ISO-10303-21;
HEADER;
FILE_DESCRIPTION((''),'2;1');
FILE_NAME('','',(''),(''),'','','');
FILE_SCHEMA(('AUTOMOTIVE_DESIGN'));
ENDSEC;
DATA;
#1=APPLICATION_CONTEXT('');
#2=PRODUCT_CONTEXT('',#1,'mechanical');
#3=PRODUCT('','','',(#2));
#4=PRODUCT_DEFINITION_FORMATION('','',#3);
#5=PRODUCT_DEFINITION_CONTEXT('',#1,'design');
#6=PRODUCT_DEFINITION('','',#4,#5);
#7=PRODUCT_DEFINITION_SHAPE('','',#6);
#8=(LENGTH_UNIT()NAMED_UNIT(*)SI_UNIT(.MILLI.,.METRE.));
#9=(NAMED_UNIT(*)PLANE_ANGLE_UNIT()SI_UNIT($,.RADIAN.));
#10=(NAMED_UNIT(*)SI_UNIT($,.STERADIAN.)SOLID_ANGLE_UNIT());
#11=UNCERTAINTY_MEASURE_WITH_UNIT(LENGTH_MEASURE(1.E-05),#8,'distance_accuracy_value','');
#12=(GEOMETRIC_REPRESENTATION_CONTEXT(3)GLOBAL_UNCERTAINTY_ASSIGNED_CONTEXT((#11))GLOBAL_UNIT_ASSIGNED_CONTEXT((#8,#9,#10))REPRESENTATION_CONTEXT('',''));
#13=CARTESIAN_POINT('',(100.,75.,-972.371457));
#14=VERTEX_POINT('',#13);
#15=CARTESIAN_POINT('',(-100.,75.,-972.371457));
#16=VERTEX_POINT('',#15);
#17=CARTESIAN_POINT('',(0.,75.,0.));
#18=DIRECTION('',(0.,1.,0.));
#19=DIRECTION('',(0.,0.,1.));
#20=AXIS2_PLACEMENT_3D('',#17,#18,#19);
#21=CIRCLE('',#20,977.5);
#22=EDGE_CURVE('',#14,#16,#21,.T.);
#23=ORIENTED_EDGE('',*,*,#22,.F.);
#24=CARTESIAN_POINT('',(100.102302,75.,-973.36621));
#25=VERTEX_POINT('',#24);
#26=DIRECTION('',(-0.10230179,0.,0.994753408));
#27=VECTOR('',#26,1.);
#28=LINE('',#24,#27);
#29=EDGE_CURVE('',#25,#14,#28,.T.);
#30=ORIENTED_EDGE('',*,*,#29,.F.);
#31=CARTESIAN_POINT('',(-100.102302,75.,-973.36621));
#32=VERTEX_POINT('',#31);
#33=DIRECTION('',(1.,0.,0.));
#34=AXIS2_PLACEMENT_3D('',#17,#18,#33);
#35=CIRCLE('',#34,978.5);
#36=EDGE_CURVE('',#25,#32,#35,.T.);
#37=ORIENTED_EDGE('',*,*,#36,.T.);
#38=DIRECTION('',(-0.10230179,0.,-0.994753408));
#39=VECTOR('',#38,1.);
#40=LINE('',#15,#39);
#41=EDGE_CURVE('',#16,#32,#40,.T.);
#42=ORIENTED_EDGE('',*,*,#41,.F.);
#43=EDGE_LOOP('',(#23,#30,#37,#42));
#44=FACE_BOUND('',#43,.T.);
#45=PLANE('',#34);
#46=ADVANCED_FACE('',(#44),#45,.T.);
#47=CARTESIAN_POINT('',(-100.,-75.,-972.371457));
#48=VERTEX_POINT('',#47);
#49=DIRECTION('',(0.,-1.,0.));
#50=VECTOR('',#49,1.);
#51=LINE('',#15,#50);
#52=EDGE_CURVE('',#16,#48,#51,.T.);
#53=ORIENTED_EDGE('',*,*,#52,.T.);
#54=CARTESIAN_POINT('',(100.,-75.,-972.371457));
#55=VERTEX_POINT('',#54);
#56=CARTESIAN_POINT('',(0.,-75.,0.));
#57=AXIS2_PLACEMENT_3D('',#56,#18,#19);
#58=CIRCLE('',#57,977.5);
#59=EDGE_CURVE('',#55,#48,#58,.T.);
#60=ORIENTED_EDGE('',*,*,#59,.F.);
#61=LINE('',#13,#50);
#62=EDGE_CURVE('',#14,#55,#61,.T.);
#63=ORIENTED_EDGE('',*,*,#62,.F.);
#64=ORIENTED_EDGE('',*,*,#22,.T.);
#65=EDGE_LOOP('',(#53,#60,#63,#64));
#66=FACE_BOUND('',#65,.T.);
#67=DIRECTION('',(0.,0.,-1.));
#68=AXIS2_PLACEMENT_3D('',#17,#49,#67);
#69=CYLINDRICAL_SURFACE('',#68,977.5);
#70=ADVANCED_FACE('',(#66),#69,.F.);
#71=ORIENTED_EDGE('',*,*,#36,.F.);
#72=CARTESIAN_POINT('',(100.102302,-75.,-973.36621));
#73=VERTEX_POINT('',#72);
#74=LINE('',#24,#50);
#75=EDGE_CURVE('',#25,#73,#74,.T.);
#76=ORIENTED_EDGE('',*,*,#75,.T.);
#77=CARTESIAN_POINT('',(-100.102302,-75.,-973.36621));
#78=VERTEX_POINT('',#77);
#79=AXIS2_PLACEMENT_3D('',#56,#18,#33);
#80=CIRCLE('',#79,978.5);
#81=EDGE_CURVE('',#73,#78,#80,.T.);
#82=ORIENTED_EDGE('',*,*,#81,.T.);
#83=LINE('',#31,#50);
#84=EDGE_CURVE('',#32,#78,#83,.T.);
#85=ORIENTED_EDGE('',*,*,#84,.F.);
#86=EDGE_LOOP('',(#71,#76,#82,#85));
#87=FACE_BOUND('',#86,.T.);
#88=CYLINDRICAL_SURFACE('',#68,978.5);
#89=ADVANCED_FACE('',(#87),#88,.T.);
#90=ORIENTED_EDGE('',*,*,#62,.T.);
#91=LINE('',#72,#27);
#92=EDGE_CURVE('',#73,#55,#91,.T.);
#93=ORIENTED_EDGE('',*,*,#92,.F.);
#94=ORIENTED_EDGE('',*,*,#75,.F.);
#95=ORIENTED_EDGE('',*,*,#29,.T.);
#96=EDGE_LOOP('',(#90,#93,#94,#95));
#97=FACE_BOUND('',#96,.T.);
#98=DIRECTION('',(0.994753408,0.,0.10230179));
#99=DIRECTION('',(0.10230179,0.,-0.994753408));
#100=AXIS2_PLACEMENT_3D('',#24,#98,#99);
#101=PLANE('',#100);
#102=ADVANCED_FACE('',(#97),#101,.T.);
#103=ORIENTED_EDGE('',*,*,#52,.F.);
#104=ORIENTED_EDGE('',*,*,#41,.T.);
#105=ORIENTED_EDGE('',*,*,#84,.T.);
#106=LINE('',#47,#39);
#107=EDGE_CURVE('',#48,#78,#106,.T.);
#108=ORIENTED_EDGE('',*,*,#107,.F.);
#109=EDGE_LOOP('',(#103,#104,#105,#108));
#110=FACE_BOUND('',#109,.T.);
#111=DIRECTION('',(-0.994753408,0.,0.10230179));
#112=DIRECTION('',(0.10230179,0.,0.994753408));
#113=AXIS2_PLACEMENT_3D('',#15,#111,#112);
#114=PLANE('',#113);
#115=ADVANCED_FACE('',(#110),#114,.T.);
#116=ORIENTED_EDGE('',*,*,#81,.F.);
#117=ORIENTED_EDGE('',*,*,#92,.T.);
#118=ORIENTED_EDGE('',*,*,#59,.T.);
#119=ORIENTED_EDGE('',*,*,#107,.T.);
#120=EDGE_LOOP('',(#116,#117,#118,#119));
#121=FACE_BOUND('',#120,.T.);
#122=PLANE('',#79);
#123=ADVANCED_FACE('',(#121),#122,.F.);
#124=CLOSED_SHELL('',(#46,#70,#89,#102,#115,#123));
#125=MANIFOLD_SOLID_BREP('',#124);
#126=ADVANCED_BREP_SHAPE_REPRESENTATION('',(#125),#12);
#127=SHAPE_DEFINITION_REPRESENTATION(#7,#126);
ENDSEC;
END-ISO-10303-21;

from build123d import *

# Parameters (mm, degrees)
SM_BASE_FLANGE_1_DEPTH = 75


# Sheet-metal steps are written as plain solids
with BuildPart() as part:
    # Sketch 1 → 基体-法兰1 (new, symmetric)
    with BuildSketch(Plane(origin=(0, 0, 0), x_dir=(1, 0, 0), z_dir=(0, 1, 0))):
        with BuildLine():
            ThreePointArc((100, 972.3714568), (0, 977.5), (-100, 972.3714568))
            Line((-100, 972.3714568), (-100.10230179, 973.366210209))
            ThreePointArc((-100.10230179, 973.366210209), (0, 978.5), (100.10230179, 973.366210209))
            Line((100.10230179, 973.366210209), (100, 972.3714568))
        make_face()
    extrude(amount=SM_BASE_FLANGE_1_DEPTH, both=True)


solid = part.part
